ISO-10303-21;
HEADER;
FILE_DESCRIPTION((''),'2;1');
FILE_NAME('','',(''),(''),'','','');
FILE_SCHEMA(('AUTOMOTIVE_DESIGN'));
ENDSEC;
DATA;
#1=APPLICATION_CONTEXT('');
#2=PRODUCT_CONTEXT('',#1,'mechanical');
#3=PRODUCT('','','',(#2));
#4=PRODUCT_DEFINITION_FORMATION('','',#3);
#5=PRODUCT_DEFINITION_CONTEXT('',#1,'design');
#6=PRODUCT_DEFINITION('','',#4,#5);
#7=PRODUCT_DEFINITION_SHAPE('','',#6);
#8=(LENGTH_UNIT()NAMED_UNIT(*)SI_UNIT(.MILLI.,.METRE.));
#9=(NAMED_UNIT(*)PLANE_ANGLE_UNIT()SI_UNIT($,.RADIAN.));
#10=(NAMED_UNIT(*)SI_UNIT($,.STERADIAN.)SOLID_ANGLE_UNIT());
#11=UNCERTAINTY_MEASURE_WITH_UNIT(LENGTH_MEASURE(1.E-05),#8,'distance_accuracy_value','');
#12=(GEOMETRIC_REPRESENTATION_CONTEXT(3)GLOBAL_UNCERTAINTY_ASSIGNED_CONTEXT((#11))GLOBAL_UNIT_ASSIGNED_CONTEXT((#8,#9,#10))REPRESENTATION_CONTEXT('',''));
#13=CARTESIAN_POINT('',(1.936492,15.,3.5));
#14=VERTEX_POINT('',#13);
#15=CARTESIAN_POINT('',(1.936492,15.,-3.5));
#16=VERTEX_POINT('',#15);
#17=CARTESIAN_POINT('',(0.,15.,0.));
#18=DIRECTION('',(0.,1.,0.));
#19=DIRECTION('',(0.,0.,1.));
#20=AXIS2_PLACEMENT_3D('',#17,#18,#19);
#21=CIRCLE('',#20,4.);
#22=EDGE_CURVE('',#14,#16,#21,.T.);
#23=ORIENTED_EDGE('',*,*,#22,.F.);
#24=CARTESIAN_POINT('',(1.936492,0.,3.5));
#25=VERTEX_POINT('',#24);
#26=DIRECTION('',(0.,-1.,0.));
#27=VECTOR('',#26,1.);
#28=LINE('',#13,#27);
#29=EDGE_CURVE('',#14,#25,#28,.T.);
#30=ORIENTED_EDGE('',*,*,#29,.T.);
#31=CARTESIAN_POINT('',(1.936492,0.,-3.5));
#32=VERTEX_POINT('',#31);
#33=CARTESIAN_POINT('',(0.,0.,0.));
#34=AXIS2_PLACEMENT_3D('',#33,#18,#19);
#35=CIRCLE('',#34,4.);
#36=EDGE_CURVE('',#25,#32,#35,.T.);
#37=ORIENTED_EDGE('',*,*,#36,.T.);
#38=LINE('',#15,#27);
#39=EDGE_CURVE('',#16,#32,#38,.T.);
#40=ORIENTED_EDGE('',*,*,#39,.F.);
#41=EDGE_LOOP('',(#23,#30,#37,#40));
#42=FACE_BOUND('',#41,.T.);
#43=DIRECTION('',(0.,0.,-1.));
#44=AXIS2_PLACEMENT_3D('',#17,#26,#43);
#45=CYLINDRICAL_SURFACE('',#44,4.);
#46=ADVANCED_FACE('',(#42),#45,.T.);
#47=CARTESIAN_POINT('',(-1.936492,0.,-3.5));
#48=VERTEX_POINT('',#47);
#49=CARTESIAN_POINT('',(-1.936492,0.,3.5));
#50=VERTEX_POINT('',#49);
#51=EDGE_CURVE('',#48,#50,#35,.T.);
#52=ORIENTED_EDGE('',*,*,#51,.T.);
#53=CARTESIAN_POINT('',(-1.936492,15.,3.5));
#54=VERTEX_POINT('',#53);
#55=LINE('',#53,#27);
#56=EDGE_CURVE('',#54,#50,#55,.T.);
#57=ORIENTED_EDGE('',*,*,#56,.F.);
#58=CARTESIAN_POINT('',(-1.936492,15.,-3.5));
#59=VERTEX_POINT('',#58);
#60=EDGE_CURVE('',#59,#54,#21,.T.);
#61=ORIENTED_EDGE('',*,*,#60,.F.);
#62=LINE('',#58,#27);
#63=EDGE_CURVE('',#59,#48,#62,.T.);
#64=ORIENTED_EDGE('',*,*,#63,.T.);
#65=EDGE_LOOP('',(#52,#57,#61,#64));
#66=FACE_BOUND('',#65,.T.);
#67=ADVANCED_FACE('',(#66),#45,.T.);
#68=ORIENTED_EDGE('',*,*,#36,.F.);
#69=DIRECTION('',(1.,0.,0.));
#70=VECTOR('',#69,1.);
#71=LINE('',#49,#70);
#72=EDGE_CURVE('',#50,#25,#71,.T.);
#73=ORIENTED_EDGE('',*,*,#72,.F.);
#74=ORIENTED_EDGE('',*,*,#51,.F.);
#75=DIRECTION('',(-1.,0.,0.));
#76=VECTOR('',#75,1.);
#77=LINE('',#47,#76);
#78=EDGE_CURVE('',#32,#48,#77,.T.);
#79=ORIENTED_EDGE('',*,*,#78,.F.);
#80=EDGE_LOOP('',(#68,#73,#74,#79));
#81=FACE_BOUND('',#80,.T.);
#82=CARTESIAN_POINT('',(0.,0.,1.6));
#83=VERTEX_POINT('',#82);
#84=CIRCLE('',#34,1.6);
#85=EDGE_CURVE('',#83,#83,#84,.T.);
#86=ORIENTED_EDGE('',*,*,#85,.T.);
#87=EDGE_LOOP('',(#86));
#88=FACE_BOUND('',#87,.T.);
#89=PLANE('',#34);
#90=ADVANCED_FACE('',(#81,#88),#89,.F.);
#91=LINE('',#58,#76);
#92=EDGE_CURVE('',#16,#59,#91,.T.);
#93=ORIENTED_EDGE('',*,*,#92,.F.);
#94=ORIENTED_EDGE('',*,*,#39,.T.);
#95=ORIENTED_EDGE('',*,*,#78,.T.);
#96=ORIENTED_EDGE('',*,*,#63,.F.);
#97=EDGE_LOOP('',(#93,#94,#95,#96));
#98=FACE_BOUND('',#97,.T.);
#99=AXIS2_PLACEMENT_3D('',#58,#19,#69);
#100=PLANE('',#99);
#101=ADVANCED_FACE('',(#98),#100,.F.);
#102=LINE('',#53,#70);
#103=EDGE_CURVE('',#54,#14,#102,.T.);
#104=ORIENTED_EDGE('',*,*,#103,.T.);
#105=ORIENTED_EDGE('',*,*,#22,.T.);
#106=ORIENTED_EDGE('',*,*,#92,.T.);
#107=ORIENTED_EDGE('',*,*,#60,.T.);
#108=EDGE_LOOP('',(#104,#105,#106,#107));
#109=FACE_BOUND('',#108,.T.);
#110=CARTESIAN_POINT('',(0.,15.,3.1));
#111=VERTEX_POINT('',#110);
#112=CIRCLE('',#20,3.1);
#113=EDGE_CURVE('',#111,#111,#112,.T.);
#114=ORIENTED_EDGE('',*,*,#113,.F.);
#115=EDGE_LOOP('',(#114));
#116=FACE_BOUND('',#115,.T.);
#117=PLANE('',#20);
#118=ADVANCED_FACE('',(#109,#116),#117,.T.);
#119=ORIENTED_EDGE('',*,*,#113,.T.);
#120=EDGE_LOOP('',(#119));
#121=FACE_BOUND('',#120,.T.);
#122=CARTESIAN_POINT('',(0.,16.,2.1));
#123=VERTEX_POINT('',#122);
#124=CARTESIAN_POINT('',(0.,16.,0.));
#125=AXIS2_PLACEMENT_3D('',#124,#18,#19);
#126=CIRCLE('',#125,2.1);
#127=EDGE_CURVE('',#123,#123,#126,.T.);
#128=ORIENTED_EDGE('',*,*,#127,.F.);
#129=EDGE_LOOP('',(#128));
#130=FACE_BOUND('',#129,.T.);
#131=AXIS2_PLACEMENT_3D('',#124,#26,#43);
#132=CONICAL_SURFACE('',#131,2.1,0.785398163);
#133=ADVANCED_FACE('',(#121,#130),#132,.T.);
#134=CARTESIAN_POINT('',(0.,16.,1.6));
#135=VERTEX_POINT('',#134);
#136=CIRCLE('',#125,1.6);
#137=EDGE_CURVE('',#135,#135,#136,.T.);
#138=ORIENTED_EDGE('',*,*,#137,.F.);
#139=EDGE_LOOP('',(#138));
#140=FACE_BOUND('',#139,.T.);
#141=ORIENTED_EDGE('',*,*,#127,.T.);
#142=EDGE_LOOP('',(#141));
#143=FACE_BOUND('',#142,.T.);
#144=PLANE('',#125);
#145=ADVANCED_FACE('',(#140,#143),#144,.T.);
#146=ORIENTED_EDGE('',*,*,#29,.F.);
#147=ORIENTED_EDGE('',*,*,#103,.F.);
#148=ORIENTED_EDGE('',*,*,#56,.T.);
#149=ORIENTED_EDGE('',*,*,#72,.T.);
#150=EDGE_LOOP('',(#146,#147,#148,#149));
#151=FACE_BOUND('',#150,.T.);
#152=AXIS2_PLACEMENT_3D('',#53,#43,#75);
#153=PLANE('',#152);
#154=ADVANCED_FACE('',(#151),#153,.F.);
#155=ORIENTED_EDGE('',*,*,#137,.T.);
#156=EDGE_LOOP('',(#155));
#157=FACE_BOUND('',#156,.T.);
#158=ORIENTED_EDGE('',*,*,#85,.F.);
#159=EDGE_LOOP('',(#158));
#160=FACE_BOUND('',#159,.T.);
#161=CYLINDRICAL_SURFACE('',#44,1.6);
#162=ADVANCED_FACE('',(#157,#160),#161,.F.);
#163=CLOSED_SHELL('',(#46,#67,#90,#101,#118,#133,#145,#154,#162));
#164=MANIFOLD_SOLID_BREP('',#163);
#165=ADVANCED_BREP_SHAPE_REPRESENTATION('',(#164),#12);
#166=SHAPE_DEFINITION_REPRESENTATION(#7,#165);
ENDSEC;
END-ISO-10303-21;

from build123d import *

# Parameters (mm, degrees)
SKETCH1_R           = 1.6
BOSS_EXTRUDE1_DEPTH = 15
SKETCH2_R           = 3.1
SKETCH2_R_2         = 1.6
BOSS_EXTRUDE2_DEPTH = 1
CHAMFER1_SIZE       = 1


with BuildPart() as part:
    # Sketch1 → Boss-Extrude1 (new body)
    with BuildSketch(Plane(origin=(0, 0, 0), x_dir=(1, 0, 0), z_dir=(0, 1, 0))):
        with BuildLine():
            Line((-1.936491673, -3.5), (1.936491673, -3.5))
            ThreePointArc((1.936491673, -3.5), (4, 0), (1.936491673, 3.5))
            Line((1.936491673, 3.5), (-1.936491673, 3.5))
            ThreePointArc((-1.936491673, 3.5), (-4, 0), (-1.936491673, -3.5))
        make_face()
        with Locations(Location((0, 0, 0), (0, 0, 270))):
            Circle(SKETCH1_R, mode=Mode.SUBTRACT)
    extrude(amount=BOSS_EXTRUDE1_DEPTH)

    # Sketch2 → Boss-Extrude2 (add)
    with BuildSketch(Plane(origin=(0, 15, 0), x_dir=(1, 0, 0), z_dir=(0, 1, 0))):
        with Locations(Location((0, 0, 0), (0, 0, 270))):
            Circle(SKETCH2_R)
        with Locations(Location((0, 0, 0), (0, 0, 270))):
            Circle(SKETCH2_R_2, mode=Mode.SUBTRACT)
    extrude(amount=BOSS_EXTRUDE2_DEPTH)

    # Chamfer1
    chamfer1_edges = [part.edges().sort_by_distance(p)[0] for p in [
        (0, 16, -3.1),
    ]]
    chamfer(chamfer1_edges, length=CHAMFER1_SIZE - 0.0001)  # a hair under: the kernel refuses the full size


solid = part.part
